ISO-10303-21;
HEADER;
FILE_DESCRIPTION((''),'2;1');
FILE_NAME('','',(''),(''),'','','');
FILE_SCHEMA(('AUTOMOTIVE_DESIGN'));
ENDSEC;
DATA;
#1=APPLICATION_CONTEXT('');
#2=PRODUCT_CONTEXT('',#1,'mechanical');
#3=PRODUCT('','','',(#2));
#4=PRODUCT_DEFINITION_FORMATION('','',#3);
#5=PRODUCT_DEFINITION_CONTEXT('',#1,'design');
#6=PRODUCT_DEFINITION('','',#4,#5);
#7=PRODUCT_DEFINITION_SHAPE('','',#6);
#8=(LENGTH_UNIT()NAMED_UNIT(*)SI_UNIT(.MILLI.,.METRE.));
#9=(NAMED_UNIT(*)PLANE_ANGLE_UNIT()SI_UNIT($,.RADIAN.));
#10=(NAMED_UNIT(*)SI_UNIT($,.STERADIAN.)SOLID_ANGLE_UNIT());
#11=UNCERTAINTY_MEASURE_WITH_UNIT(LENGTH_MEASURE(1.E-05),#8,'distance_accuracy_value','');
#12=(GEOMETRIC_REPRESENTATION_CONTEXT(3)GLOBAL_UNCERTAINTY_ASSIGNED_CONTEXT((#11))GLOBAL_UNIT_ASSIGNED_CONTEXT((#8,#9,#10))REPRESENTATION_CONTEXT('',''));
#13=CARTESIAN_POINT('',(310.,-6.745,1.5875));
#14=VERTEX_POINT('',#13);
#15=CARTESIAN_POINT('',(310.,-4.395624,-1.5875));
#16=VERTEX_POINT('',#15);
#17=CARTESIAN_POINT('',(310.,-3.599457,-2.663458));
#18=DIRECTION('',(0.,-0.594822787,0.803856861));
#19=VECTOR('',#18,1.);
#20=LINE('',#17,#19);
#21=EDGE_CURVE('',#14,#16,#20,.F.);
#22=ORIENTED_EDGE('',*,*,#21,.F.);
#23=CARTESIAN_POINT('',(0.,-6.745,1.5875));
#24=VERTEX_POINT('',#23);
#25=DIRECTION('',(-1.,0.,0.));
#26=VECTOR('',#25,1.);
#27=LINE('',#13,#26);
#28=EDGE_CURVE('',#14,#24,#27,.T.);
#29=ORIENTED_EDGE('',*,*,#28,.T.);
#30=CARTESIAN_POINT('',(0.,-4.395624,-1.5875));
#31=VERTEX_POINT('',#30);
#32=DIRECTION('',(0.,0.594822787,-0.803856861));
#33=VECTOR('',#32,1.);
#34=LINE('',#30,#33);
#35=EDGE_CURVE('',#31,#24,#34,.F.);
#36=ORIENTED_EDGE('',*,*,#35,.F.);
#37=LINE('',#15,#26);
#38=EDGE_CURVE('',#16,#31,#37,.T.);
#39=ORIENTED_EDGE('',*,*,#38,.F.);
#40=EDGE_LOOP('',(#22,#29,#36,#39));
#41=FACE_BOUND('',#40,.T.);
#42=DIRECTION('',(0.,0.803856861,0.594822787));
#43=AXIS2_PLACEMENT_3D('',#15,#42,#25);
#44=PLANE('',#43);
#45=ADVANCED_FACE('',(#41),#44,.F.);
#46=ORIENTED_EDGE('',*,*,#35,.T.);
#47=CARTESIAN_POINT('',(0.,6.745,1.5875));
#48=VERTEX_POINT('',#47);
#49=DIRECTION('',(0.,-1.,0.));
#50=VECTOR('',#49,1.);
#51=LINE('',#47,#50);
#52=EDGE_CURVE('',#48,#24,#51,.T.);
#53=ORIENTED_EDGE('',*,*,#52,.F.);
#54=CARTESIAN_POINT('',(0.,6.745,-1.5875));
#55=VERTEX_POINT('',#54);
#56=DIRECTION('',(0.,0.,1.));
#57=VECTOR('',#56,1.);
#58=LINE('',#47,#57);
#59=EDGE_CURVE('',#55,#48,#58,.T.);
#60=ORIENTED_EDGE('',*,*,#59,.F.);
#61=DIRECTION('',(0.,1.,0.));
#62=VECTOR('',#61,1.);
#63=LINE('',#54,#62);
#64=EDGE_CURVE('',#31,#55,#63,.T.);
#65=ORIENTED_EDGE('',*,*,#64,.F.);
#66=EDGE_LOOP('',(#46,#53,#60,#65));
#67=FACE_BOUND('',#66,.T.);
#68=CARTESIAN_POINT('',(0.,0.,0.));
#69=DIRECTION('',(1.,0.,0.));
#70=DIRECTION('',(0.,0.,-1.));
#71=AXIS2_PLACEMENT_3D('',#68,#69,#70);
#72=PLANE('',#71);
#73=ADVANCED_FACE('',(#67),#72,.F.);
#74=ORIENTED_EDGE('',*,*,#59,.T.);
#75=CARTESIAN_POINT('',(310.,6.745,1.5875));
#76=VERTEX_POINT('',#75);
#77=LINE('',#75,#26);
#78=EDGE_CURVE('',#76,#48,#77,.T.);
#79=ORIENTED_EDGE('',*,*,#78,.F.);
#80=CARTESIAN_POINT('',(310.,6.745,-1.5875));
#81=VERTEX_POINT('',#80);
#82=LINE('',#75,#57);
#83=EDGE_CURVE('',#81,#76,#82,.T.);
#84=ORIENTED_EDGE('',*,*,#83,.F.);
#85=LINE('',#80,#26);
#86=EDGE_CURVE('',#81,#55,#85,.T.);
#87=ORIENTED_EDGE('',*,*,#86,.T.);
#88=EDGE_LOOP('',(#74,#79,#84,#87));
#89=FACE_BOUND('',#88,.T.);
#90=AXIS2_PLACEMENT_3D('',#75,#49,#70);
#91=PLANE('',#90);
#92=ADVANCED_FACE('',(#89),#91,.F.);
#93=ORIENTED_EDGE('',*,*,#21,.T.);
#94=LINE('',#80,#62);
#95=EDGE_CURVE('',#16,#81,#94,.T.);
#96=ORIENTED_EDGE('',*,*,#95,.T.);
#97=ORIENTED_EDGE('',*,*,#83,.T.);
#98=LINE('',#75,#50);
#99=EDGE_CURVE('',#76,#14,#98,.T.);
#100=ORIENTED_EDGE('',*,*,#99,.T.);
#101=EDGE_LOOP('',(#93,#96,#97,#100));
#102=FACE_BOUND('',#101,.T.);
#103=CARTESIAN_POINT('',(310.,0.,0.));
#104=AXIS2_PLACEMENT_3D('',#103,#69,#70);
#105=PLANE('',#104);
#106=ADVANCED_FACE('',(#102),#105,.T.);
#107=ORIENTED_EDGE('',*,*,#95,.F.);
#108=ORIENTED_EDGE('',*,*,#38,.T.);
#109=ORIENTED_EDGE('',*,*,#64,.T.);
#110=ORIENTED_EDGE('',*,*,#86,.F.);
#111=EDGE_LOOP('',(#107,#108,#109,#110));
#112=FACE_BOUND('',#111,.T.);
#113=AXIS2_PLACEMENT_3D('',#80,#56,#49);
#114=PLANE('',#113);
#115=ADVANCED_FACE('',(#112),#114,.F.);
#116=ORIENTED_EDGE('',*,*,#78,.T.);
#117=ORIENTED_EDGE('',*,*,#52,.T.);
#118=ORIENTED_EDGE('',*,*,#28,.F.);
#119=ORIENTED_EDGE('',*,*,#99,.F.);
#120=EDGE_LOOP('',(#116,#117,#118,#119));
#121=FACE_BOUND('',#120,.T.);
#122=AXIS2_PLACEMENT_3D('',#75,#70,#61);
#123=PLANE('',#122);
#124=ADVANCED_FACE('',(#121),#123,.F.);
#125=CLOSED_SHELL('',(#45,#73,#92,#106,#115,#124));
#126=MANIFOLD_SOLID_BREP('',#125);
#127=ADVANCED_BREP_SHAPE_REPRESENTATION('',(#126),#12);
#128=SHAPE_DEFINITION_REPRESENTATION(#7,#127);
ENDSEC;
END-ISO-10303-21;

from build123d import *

# Parameters (mm, degrees)
SKETCH2_W           = 3.175
SKETCH2_H           = 13.49
BOSS_EXTRUDE1_DEPTH = 310
CHAMFER1_SIZE       = 2.349376413
CHAMFER1_SIZE_2     = 3.175


with BuildPart() as part:
    # Sketch2 → Boss-Extrude1 (new body)
    with BuildSketch(Plane(origin=(0, 0, 0), x_dir=(0, 0, -1), z_dir=(1, 0, 0))):
        Rectangle(SKETCH2_W, SKETCH2_H)
    extrude(amount=BOSS_EXTRUDE1_DEPTH)

    # Chamfer1
    # the kernel refuses this chamfer: 3.175, 2.349376413 mm, written as the material it takes off along each edge
    with BuildSketch(Plane(origin=(-8.194900993, -6.745, -1.5875), x_dir=(0, 0.9991149585695113, -0.0420630427173772), z_dir=(1, 0, 0))) as chamfer1_piece_1:
        Polygon((CHAMFER1_SIZE * 0.999114958661, CHAMFER1_SIZE * 0.0420630427212), (-CHAMFER1_SIZE_2 * 0.0420630427174, CHAMFER1_SIZE_2 * 0.99911495857), (0, 0), align=None)
    extrude(amount=326.389801986, mode=Mode.SUBTRACT)


solid = part.part
